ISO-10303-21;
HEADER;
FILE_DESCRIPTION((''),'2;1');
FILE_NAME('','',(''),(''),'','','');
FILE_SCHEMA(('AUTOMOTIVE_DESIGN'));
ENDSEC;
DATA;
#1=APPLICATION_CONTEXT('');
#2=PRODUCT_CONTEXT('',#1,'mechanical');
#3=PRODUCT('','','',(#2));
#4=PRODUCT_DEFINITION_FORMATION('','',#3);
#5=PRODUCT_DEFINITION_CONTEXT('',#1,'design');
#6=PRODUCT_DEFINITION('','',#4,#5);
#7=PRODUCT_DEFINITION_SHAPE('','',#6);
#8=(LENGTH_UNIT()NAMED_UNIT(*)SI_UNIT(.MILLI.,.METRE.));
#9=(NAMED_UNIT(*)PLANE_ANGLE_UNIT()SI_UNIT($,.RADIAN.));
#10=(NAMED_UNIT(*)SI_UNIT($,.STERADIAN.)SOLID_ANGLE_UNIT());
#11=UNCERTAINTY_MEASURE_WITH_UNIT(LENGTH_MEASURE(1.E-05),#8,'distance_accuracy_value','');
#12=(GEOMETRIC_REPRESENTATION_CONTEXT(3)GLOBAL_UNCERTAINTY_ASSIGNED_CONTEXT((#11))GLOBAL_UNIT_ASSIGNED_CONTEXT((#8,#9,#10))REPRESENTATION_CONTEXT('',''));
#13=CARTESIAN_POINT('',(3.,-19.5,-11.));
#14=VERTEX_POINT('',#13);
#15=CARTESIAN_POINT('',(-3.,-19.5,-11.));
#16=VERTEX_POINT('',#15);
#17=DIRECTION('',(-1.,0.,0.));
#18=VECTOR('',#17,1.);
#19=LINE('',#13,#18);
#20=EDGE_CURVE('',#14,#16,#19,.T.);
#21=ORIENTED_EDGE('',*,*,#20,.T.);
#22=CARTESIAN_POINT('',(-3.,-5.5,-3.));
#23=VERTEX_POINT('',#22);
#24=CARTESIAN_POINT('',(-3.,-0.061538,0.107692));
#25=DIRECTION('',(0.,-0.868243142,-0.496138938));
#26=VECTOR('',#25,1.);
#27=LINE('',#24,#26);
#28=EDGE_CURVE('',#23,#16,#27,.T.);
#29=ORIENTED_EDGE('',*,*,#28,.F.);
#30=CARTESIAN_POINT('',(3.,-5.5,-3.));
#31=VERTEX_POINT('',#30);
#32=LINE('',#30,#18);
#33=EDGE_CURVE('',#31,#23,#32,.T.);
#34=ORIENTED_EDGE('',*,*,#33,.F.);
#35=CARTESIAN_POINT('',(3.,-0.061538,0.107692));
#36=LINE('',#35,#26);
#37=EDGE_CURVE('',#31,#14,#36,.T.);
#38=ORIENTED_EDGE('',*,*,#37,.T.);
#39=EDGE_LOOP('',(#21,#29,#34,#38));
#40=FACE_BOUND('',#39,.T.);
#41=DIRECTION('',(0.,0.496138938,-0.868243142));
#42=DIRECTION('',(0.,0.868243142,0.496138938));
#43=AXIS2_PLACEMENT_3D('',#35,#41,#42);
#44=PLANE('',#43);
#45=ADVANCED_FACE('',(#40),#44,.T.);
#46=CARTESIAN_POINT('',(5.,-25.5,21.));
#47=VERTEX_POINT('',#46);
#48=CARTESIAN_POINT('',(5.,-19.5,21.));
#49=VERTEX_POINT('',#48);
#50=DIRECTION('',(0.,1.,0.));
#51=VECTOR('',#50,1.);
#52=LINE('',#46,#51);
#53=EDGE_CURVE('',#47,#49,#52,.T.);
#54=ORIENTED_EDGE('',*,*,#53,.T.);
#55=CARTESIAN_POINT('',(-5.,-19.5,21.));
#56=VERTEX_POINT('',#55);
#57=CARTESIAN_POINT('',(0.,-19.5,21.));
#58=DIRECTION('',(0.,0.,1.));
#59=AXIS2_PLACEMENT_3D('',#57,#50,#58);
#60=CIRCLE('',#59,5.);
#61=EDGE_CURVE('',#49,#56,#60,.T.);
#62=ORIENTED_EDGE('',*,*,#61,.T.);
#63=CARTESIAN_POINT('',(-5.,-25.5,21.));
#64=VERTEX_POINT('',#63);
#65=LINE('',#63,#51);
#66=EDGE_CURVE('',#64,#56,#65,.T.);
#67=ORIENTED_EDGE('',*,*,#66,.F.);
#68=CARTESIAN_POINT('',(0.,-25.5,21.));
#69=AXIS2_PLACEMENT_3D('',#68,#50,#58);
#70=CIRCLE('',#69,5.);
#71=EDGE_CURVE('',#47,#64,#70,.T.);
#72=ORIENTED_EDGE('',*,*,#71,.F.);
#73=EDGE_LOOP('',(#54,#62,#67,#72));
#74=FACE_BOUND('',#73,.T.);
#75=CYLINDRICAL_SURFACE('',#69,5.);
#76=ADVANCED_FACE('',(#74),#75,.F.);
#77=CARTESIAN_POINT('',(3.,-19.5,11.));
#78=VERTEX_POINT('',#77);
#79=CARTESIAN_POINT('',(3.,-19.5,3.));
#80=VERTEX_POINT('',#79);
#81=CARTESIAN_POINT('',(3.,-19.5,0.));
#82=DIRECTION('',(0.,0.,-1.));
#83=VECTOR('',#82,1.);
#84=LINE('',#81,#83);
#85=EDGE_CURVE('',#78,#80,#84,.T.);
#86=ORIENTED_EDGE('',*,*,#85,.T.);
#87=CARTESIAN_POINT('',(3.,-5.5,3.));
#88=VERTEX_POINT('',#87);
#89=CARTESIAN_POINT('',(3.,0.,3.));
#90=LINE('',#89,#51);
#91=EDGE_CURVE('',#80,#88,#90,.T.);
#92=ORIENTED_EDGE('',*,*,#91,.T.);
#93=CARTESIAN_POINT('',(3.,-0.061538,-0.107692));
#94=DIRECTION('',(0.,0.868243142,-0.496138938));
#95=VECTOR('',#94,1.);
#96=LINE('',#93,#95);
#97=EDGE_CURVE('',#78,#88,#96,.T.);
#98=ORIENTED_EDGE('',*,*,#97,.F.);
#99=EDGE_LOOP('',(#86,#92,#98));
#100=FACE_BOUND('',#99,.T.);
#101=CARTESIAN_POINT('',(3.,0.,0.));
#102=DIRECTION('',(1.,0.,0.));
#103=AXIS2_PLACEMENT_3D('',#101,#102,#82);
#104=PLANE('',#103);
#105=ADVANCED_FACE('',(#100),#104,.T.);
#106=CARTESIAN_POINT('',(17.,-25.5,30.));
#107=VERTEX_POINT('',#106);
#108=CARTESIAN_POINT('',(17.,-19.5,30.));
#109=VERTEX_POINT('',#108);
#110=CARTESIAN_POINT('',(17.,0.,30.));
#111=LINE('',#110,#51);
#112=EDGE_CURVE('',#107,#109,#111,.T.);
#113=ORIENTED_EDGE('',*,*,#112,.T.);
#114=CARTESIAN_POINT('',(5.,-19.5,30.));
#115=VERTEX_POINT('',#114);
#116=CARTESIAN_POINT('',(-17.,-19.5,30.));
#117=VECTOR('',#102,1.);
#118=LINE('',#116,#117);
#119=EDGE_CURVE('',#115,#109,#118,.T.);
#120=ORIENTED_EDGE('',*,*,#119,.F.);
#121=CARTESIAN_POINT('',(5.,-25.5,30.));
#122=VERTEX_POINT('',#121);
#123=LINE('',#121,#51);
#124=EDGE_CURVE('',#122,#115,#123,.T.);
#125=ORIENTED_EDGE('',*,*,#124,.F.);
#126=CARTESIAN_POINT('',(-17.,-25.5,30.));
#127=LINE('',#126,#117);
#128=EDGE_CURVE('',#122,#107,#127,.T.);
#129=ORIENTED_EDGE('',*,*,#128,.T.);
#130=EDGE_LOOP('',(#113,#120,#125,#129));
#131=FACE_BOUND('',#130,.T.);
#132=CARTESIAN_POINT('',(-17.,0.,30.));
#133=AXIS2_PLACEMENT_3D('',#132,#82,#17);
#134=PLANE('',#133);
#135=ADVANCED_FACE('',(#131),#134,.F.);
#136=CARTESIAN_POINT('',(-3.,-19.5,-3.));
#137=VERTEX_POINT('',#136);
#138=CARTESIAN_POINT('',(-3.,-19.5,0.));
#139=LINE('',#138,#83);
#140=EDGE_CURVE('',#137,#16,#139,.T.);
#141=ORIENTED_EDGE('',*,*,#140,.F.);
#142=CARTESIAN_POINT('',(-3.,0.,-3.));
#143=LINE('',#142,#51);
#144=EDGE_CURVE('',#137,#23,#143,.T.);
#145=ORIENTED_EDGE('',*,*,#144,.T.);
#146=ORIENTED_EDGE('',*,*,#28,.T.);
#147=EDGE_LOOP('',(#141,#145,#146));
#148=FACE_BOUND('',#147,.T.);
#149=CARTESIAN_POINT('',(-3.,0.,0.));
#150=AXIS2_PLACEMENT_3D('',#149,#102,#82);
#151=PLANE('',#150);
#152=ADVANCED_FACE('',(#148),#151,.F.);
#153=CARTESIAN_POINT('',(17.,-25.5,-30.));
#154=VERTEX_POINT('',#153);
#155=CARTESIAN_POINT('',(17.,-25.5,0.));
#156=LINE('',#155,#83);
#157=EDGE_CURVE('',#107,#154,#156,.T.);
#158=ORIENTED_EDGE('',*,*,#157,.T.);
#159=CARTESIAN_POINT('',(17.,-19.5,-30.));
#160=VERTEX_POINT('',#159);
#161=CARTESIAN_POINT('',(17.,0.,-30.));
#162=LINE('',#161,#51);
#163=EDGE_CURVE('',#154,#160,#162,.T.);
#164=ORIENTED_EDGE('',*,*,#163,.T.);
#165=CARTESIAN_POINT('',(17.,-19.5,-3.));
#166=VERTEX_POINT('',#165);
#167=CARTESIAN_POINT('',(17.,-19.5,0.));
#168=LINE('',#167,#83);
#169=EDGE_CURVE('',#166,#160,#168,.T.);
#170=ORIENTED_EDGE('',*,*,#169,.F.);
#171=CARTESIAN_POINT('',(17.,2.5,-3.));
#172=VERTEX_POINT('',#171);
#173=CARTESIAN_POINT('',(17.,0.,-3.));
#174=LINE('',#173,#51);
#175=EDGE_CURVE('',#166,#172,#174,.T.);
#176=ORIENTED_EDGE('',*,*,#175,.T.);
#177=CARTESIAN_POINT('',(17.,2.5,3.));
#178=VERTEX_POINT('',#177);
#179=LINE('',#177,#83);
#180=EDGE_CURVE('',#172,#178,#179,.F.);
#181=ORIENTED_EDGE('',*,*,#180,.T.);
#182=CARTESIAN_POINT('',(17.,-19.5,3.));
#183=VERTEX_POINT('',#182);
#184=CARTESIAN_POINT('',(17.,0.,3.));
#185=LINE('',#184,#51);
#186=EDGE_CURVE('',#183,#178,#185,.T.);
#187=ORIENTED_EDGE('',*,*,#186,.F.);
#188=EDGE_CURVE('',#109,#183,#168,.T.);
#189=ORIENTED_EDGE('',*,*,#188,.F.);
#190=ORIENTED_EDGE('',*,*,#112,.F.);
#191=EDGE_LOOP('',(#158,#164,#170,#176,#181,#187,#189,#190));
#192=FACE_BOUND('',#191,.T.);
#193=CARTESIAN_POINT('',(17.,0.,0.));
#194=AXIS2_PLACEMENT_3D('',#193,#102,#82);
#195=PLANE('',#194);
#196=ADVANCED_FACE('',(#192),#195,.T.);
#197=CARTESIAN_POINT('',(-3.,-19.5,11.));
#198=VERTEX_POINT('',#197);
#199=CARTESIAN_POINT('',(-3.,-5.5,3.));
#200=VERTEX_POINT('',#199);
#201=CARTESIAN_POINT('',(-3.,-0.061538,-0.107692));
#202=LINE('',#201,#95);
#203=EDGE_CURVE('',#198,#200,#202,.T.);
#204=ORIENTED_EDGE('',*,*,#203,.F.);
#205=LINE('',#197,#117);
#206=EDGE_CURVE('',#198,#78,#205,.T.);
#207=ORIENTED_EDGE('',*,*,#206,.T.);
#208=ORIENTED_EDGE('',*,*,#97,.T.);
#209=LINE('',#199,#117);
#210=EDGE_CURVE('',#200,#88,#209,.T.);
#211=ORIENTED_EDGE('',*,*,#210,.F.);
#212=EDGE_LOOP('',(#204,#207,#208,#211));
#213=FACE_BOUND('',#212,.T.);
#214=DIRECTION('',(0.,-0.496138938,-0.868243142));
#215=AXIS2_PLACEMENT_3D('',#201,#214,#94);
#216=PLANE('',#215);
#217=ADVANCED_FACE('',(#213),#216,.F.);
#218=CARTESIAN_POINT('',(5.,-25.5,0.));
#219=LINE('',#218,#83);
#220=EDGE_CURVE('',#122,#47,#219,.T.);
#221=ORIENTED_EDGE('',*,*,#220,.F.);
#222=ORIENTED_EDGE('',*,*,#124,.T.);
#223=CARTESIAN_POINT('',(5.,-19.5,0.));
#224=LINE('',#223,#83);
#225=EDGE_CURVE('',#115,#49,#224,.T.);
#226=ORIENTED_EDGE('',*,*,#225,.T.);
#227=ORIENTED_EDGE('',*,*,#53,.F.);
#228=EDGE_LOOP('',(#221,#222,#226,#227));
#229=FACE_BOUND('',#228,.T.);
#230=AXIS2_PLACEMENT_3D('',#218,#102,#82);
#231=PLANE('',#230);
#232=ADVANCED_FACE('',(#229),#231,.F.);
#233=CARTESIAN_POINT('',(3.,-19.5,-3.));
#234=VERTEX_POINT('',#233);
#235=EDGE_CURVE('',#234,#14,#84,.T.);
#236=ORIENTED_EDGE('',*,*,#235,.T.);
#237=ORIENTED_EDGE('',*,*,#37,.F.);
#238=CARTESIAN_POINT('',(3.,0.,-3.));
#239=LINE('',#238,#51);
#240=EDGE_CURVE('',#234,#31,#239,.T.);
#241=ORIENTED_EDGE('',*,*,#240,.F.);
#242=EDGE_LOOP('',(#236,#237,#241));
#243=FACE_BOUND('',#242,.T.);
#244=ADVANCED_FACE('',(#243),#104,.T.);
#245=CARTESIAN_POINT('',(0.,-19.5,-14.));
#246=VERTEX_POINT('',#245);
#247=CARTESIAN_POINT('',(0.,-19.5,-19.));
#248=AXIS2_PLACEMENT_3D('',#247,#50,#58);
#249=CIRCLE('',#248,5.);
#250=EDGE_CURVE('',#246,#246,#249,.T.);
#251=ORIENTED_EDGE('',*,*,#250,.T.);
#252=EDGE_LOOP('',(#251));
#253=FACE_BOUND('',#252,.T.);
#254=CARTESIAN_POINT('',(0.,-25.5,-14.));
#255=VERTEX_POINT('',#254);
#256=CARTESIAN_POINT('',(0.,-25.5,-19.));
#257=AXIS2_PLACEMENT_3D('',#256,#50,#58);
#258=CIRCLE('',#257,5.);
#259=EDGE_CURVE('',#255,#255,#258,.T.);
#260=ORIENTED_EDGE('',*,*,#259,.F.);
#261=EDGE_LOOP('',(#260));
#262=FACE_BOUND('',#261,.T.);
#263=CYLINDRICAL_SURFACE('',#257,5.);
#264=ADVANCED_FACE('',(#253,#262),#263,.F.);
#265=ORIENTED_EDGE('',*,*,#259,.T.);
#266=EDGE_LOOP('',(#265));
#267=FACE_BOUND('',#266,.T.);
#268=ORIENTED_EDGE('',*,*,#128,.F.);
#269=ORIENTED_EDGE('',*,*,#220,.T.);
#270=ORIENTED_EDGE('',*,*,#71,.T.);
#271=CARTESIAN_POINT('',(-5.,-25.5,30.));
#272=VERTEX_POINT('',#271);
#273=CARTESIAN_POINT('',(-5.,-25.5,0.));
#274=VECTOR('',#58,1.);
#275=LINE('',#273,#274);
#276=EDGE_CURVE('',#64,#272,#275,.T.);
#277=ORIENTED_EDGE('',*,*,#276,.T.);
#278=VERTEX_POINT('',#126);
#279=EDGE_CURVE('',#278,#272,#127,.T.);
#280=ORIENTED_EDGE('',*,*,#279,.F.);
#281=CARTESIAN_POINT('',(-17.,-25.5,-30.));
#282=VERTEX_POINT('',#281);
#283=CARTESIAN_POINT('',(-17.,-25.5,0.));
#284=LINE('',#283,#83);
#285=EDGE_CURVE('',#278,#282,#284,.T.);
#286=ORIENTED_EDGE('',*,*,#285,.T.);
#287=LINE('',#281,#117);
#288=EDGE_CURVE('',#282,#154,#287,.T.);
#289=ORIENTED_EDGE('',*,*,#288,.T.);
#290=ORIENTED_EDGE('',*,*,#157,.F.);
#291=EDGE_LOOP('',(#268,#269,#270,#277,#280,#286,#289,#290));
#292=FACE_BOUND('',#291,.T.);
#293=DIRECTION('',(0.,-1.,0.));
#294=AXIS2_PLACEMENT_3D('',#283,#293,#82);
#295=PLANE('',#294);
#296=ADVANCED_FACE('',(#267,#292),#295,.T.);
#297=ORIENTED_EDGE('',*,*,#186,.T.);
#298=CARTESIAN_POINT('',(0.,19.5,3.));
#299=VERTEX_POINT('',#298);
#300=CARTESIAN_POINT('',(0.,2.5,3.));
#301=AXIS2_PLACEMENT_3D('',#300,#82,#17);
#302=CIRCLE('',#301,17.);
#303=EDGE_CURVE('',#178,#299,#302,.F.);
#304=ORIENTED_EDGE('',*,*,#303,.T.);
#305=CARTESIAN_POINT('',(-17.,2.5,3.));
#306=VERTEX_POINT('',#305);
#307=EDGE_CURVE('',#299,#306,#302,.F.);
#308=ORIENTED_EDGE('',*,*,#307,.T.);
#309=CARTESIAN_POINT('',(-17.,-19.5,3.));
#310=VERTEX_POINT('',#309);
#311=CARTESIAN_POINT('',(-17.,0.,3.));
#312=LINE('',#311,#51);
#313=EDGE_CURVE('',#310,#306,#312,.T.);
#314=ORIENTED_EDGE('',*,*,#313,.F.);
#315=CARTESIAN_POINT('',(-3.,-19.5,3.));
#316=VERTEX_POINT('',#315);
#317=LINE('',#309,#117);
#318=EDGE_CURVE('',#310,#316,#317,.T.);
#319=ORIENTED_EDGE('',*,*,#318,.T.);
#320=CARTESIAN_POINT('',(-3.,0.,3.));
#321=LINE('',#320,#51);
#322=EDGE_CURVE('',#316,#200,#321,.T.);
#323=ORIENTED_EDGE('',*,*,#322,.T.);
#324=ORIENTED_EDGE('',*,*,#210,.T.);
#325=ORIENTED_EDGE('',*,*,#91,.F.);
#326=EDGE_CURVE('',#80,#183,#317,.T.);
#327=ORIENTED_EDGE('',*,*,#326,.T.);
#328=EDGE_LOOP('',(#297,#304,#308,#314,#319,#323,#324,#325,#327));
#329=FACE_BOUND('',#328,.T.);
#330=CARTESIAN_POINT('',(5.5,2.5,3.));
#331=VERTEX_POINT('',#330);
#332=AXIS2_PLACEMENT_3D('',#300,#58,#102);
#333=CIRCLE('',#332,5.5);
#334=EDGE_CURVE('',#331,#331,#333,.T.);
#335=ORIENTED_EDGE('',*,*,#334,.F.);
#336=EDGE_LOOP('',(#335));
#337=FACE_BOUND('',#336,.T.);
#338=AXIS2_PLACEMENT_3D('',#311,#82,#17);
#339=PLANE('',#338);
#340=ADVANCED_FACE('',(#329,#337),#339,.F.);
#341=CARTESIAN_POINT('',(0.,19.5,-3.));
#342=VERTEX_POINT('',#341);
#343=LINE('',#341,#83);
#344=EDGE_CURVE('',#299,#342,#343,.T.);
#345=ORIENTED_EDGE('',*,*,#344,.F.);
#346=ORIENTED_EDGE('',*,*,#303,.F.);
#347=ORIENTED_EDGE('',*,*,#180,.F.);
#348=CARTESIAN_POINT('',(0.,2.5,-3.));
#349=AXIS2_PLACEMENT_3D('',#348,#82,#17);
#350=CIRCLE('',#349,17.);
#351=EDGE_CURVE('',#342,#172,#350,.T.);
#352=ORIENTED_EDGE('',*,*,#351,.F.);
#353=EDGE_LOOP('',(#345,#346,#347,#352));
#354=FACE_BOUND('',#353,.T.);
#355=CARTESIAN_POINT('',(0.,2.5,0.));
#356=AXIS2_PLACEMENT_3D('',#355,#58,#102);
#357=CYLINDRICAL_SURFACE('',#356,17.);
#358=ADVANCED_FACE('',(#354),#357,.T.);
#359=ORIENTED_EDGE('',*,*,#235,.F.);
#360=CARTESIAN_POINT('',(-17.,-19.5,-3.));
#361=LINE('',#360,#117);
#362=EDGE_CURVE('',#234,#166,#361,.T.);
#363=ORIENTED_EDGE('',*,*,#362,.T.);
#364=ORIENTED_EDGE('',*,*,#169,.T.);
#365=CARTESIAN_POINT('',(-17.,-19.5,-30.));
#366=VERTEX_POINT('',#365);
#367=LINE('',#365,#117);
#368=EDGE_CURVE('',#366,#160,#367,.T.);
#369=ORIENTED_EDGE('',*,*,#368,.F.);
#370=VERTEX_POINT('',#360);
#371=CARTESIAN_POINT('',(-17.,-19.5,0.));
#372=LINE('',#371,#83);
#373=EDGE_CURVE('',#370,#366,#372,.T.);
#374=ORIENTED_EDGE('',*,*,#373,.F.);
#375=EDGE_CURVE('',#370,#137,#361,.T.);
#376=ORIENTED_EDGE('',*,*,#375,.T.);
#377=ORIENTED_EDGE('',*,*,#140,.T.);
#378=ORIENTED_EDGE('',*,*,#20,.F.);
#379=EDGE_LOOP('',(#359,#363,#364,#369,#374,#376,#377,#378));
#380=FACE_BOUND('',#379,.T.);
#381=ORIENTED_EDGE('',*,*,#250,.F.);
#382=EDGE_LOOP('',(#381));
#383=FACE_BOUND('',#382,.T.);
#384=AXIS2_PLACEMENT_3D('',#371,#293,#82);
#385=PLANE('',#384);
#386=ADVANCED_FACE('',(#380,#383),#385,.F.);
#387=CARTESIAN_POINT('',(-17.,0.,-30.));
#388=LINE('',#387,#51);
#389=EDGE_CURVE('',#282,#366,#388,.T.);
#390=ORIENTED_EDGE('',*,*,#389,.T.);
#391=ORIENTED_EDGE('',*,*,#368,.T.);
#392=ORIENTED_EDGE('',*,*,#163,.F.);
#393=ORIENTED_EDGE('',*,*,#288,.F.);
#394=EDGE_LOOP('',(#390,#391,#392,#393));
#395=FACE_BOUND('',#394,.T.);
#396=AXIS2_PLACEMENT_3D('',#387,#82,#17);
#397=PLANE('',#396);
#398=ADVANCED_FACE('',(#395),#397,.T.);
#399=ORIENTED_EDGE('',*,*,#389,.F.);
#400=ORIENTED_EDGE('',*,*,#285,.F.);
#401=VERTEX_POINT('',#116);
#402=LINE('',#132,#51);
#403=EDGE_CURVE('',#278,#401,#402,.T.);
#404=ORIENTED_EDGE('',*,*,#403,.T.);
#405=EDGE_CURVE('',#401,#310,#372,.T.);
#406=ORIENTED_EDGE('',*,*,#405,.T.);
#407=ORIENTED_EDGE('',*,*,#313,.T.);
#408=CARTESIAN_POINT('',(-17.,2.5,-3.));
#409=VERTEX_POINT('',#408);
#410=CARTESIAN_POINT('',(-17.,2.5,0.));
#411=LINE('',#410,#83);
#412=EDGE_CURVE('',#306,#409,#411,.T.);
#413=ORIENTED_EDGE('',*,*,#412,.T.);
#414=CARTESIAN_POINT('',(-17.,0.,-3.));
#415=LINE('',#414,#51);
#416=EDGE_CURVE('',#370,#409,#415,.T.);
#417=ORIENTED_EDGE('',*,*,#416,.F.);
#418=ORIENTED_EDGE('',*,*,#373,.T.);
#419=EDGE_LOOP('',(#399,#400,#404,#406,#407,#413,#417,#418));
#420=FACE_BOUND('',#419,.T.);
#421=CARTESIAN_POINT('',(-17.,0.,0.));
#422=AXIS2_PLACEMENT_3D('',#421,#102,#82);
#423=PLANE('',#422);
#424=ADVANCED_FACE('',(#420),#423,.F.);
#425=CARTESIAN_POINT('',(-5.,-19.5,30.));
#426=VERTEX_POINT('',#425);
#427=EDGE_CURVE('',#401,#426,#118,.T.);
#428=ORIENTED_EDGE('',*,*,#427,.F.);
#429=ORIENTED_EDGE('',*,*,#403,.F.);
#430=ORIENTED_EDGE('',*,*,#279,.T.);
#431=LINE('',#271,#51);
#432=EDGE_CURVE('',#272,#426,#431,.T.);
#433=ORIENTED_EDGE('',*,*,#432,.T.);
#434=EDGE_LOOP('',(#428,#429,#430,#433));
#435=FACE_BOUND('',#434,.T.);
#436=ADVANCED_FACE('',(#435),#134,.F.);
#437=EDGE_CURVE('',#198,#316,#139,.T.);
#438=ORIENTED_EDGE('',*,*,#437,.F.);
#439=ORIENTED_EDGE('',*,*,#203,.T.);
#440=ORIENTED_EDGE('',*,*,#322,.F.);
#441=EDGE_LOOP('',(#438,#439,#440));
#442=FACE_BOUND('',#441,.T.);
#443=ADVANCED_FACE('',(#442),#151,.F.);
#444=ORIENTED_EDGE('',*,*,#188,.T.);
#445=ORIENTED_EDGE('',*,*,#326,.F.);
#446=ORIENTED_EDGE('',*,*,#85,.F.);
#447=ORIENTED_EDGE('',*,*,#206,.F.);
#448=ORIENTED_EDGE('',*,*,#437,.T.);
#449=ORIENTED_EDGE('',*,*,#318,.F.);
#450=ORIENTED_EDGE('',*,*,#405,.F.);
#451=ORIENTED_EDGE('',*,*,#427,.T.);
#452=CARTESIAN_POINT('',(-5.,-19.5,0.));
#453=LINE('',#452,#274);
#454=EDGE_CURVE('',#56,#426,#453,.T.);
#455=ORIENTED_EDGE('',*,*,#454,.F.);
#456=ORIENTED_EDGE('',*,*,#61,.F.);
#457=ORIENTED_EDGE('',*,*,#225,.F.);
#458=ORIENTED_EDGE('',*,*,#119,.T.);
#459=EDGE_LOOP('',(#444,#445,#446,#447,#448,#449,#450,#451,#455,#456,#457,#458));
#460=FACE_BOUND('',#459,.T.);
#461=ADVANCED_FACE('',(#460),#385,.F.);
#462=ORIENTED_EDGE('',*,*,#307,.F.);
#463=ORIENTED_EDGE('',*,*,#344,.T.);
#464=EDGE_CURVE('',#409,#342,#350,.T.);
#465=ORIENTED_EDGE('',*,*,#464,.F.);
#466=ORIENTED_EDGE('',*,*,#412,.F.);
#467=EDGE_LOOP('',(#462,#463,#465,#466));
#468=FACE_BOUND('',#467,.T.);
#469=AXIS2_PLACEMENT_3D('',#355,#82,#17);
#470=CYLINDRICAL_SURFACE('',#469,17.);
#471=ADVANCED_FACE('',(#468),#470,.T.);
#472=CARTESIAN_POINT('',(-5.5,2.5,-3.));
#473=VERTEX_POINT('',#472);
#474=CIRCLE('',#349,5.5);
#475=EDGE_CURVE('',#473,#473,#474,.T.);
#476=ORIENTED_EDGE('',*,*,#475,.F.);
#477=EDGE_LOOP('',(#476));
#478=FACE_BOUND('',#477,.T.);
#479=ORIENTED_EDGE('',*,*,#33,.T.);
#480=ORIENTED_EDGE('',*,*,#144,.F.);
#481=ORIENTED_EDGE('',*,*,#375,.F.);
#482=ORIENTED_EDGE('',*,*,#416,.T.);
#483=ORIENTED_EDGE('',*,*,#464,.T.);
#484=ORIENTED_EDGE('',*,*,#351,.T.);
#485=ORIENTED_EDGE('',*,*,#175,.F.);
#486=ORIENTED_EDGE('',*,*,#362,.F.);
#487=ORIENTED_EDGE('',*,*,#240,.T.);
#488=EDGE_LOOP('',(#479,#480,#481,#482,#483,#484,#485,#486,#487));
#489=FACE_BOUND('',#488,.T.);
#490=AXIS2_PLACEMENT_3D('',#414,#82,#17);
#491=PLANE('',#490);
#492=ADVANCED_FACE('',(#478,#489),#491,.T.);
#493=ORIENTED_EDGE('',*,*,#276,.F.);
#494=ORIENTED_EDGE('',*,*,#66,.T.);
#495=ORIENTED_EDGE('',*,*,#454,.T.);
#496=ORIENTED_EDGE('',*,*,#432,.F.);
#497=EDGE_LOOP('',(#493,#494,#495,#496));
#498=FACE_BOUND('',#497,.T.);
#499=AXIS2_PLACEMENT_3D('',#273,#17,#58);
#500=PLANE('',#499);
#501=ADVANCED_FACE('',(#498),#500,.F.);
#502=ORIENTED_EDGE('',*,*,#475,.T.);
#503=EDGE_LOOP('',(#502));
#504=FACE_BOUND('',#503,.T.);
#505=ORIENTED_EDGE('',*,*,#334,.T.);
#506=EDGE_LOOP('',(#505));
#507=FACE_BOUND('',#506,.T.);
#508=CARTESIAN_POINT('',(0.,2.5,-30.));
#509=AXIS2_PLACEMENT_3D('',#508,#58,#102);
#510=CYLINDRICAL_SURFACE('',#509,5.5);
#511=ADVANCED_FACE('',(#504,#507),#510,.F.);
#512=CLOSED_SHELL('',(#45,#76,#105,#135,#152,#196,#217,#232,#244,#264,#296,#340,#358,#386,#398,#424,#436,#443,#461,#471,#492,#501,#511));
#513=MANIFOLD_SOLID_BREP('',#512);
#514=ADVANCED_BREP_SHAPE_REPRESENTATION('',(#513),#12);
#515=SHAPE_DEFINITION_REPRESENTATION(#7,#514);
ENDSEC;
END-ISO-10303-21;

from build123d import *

# Parameters (mm, degrees)
EXTRUDE_1_DEPTH      = 17
EXTRUDE_1_DEPTH_BACK = 17
SKETCH_1_W           = 6
SKETCH_1_H           = 39
FILLET_1_R           = 17
SKETCH_2_R           = 5.5
CUT_EXTRUDE_1_DEPTH  = 46.036096634
EXTRUDE_2_DEPTH      = 3
EXTRUDE_2_DEPTH_BACK = 3
SKETCH_3_R           = 5
CUT_EXTRUDE_2_DEPTH  = 53.057660339


with BuildPart() as part:
    # Эскиз1 → Бобышка-Вытянуть1 (new, two sides: drawn at the far end of the back side and taken through both)
    with BuildSketch(Plane(origin=(0, 0, 0), x_dir=(0, 0, -1), z_dir=(1, 0, 0)).offset(-EXTRUDE_1_DEPTH_BACK)):
        Rectangle(SKETCH_1_W, SKETCH_1_H)
        Polygon((-3, -19.5), (-11, -19.5), (-30, -19.5), (-30, -25.5), (30, -25.5), (30, -19.5), (11, -19.5), (3, -19.5), align=None)
    extrude(amount=EXTRUDE_1_DEPTH + EXTRUDE_1_DEPTH_BACK)

    # Скругление1
    fillet_1_edges = [part.edges().sort_by_distance(p)[0] for p in [
        (17, 19.5, 0),
        (-17, 19.5, 0),
    ]]
    fillet(fillet_1_edges, radius=FILLET_1_R - 0.0001)  # a hair under: the kernel refuses the full size

    # Эскиз2 → Вырез-Вытянуть1 (cut, through all)
    with BuildSketch(Plane.XY.offset(3)):
        with Locations((0, 2.5)):
            Circle(SKETCH_2_R)
    extrude(amount=-CUT_EXTRUDE_1_DEPTH, mode=Mode.SUBTRACT)

    # Эскиз1<3> → Бобышка-Вытянуть2 (add, two sides: drawn at the far end of the back side and taken through both)
    with BuildSketch(Plane(origin=(0, 0, 0), x_dir=(0, 0, -1), z_dir=(1, 0, 0)).offset(-EXTRUDE_2_DEPTH_BACK)):
        Polygon((-3, -5.5), (-11, -19.5), (-3, -19.5), align=None)
        Polygon((3, -5.5), (3, -19.5), (11, -19.5), align=None)
    extrude(amount=EXTRUDE_2_DEPTH + EXTRUDE_2_DEPTH_BACK)

    # Эскиз3 → Вырез-Вытянуть2 (cut, through all)
    with BuildSketch(Plane(origin=(0, -19.5, 0), x_dir=(1, 0, 0), z_dir=(0, 1, 0))):
        with Locations(Location((0, 19, 0), (0, 0, 270))):
            Circle(SKETCH_3_R)
        with Locations((0, -21)):
            Circle(SKETCH_3_R)
        with BuildLine():
            ThreePointArc((5, -21), (0, -26), (-5, -21))
            Line((-5, -21), (-5, -30))
            Line((-5, -30), (5, -30))
            Line((5, -30), (5, -21))
        make_face()
    extrude(amount=-CUT_EXTRUDE_2_DEPTH, mode=Mode.SUBTRACT)


solid = part.part
